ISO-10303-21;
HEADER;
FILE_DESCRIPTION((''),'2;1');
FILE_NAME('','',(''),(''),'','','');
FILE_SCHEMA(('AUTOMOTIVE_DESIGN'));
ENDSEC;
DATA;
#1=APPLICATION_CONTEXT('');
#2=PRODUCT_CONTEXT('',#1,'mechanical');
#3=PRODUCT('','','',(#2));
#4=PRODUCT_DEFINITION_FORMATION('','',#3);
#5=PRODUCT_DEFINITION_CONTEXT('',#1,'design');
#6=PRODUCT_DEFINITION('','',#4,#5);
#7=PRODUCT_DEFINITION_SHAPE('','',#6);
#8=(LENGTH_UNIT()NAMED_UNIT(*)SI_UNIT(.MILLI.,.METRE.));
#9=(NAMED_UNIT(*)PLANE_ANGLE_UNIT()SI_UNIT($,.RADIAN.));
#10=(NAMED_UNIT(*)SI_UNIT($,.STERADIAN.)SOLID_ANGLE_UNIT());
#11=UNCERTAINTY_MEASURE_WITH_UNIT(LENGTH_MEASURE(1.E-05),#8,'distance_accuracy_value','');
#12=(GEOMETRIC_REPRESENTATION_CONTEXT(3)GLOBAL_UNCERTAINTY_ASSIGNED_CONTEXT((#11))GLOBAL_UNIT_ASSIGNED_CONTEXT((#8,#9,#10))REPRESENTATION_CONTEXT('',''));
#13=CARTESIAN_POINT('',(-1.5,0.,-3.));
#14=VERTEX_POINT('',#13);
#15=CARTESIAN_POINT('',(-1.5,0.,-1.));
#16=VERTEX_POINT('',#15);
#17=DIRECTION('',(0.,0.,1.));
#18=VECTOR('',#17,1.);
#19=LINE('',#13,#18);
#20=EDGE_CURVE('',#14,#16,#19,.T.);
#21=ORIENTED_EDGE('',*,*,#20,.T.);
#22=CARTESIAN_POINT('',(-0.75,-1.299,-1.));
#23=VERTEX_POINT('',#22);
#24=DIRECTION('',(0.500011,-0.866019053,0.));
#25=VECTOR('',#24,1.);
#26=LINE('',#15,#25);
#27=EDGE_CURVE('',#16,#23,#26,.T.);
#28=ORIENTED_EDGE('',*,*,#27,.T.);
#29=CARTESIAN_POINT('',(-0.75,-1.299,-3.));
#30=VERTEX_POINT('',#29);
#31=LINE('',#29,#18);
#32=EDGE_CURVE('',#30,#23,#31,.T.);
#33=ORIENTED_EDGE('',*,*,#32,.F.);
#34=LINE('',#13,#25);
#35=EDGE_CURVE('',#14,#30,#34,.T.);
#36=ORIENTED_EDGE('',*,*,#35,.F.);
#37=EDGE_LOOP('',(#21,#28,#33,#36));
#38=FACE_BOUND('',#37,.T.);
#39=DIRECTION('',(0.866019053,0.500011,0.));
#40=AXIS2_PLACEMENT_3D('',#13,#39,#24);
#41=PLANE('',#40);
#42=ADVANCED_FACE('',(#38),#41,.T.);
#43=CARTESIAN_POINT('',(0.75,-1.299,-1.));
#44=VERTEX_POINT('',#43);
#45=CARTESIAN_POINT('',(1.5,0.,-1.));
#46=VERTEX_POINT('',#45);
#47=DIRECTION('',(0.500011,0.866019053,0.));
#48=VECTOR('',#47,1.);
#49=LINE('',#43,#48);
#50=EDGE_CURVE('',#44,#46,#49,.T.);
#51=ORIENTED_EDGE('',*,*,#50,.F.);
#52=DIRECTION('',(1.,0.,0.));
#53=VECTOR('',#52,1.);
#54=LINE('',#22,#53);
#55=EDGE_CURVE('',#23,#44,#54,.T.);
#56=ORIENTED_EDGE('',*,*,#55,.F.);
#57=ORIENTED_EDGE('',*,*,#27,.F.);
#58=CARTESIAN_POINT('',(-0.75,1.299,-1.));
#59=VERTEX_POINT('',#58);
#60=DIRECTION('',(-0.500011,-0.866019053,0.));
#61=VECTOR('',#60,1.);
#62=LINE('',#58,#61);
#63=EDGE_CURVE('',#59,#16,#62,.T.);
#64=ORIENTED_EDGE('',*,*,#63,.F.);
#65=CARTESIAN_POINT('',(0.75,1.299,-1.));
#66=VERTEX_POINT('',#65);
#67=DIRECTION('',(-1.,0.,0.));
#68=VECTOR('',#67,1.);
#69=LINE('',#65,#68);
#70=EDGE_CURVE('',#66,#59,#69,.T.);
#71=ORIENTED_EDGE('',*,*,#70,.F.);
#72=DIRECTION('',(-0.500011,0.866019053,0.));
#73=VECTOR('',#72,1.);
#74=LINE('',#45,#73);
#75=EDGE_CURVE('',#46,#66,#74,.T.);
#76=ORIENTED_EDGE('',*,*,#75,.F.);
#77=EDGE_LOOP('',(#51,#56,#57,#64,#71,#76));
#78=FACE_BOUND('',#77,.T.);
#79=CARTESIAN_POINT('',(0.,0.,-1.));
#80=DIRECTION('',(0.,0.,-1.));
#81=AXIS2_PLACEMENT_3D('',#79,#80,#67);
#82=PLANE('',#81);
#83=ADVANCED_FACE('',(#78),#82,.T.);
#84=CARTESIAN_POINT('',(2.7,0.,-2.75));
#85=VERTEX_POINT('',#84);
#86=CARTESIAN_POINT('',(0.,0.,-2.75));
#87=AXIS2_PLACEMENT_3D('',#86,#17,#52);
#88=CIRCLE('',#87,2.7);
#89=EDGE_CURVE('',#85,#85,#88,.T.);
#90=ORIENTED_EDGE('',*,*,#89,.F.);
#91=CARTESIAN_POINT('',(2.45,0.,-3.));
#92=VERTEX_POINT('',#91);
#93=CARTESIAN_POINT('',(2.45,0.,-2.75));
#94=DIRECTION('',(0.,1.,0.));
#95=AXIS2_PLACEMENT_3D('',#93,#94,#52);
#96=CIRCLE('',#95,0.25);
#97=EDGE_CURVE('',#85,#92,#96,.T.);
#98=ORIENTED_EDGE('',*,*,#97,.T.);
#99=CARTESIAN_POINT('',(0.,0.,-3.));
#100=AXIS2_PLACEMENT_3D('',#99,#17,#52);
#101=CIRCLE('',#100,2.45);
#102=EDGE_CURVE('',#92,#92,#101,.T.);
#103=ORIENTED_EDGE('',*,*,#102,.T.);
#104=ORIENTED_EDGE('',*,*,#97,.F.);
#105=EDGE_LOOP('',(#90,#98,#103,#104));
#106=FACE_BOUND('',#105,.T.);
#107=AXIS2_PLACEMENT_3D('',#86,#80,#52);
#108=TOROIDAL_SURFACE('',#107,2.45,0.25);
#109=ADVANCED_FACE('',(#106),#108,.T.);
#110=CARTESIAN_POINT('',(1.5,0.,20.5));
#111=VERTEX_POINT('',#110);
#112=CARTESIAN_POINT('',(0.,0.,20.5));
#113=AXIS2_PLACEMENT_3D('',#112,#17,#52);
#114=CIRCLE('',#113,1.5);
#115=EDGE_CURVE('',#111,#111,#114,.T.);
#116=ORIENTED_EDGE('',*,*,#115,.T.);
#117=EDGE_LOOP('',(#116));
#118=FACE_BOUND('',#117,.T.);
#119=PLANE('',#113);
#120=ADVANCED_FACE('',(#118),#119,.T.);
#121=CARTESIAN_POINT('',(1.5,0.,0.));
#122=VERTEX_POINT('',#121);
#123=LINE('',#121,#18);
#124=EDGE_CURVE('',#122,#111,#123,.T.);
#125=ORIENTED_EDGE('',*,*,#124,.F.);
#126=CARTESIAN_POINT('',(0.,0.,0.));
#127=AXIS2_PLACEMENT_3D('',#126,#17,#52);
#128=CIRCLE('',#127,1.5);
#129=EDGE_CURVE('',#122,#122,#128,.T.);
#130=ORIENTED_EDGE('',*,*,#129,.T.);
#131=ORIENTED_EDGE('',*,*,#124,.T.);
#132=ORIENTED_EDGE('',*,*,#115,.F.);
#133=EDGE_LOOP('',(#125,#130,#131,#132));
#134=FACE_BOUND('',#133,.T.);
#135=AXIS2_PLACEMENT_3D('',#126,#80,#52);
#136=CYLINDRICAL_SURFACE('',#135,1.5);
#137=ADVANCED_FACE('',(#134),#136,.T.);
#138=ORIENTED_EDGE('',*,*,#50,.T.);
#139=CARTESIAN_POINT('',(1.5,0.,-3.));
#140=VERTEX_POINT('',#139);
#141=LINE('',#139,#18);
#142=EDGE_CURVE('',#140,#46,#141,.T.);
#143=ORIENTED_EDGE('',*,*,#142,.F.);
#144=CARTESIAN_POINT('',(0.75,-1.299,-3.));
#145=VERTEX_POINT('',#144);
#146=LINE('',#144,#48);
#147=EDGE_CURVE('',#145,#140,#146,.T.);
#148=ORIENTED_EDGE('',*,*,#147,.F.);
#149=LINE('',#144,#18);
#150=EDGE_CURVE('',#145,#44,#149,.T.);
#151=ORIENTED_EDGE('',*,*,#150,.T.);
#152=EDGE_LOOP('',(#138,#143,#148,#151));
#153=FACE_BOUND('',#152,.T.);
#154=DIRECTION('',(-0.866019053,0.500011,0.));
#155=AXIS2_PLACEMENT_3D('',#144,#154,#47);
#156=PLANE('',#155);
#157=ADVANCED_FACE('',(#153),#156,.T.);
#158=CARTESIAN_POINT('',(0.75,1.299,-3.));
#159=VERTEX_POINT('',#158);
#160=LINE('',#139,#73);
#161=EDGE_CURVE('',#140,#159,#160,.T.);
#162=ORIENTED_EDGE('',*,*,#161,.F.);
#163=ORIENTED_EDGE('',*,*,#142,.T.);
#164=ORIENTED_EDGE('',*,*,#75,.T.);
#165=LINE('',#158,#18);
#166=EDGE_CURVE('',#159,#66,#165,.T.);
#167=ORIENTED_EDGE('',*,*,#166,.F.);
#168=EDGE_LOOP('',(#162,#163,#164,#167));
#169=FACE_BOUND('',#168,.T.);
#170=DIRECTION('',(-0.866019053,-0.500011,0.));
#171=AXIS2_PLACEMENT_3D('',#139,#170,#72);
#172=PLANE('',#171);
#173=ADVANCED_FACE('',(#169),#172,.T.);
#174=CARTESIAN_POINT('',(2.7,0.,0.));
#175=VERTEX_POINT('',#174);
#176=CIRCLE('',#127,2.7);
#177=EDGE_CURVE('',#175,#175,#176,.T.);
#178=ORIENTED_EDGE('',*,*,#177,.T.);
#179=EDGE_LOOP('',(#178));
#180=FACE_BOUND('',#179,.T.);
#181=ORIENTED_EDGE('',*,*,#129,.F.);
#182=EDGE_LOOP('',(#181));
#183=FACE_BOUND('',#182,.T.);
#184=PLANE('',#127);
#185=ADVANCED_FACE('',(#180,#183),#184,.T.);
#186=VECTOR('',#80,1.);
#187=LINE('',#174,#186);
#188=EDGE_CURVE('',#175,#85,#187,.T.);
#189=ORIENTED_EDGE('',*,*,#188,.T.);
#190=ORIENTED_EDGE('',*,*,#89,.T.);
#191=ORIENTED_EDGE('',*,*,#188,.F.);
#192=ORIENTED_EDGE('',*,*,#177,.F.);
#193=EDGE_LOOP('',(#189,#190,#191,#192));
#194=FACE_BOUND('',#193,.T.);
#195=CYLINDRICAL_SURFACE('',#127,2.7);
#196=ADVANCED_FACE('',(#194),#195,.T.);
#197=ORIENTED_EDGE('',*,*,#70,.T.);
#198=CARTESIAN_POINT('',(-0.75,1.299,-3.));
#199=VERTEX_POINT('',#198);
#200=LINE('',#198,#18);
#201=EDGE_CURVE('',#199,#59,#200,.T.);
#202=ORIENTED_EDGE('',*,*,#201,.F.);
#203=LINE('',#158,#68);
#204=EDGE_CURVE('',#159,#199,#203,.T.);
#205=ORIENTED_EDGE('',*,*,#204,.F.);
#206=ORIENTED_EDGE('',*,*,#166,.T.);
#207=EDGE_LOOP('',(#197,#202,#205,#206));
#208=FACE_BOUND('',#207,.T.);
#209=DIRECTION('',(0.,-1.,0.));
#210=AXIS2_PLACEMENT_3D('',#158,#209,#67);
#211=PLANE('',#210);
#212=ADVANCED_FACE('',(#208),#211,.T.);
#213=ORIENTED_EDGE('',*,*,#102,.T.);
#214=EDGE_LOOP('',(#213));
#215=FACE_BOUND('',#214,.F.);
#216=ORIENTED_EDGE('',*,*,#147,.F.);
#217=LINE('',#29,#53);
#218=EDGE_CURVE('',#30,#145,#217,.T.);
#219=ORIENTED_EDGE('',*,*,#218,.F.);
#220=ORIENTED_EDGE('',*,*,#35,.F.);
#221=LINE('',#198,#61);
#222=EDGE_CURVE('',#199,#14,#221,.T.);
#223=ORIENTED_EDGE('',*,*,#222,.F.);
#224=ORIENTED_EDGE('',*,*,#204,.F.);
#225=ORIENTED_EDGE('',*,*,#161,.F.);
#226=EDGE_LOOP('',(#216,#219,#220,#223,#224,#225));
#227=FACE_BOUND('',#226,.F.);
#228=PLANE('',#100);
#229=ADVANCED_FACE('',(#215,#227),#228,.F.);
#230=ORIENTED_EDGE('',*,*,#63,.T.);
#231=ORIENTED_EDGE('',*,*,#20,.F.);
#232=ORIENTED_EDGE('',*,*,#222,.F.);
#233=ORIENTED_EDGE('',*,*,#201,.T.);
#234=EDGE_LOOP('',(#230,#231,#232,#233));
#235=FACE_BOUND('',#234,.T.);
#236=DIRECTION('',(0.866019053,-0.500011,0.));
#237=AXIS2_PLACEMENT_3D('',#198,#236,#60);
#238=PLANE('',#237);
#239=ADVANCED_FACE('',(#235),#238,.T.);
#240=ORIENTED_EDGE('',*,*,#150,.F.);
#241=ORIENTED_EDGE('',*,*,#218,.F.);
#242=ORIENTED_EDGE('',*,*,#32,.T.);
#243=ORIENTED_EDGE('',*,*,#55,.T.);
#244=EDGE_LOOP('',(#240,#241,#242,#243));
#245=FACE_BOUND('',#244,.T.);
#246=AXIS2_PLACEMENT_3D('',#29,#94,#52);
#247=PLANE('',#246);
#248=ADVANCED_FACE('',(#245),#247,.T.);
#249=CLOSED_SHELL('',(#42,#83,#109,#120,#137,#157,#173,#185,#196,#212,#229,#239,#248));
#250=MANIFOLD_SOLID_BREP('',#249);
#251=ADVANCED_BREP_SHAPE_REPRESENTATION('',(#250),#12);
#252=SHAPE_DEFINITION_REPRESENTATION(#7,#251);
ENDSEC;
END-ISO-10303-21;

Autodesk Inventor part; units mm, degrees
ref_plane "YZ Plane" through (0, 0, 0) normal (1, 0, 0) x (0, 1, 0)
ref_plane "XZ Plane" through (0, 0, 0) normal (0, 1, 0) x (-1, 0, 0)
ref_plane "XY Plane" through (0, 0, 0) normal (0, 0, 1) x (1, 0, 0)
sketch "Sketch1" plane through (0, 0, 0) normal (0, 0, 1) x (1, 0, 0)
  circle A0 centre (0, 0) radius 1.5
  circle A1 centre (0, 0) radius 2.7
  dimension "d0" = 3
  dimension "d5" = 5.4
extrude "Extrusion1" add sketch "Sketch1" along normal blind 20.5 contours A0
extrude "Extrusion2" add sketch "Sketch1" against normal blind 3 contours A0 | A1
thread "Thread2" size "M3x0.5" class "6g" standard "ANSI Metric M Profile" length 4.5
fillet "Fillet1" radius 0.25 1 edges at (-2.7, 0, -3)
sketch "Sketch2" plane through (0, 0, -3) normal (0, 0, -1) x (-1, 0, 0)
  circle A0 centre (0, 0) radius 1.5 projected
  line L0 (-1.5, 0) -> (-0.75, 1.299)
  line L1 (-0.75, 1.299) -> (0.75, 1.299)
  line L2 (0.75, 1.299) -> (1.5, 0)
  line L3 (1.5, 0) -> (0.75, -1.299)
  line L4 (0.75, -1.299) -> (-0.75, -1.299)
  line L5 (-0.75, -1.299) -> (-1.5, 0)
extrude "Extrusion3" cut sketch "Sketch2" against normal blind 2 contours L3 L4 L5 L0 L1 L2
properties part number "COTS_GENERIC_Solenoid_Actuator_Push_Rod_M3"
